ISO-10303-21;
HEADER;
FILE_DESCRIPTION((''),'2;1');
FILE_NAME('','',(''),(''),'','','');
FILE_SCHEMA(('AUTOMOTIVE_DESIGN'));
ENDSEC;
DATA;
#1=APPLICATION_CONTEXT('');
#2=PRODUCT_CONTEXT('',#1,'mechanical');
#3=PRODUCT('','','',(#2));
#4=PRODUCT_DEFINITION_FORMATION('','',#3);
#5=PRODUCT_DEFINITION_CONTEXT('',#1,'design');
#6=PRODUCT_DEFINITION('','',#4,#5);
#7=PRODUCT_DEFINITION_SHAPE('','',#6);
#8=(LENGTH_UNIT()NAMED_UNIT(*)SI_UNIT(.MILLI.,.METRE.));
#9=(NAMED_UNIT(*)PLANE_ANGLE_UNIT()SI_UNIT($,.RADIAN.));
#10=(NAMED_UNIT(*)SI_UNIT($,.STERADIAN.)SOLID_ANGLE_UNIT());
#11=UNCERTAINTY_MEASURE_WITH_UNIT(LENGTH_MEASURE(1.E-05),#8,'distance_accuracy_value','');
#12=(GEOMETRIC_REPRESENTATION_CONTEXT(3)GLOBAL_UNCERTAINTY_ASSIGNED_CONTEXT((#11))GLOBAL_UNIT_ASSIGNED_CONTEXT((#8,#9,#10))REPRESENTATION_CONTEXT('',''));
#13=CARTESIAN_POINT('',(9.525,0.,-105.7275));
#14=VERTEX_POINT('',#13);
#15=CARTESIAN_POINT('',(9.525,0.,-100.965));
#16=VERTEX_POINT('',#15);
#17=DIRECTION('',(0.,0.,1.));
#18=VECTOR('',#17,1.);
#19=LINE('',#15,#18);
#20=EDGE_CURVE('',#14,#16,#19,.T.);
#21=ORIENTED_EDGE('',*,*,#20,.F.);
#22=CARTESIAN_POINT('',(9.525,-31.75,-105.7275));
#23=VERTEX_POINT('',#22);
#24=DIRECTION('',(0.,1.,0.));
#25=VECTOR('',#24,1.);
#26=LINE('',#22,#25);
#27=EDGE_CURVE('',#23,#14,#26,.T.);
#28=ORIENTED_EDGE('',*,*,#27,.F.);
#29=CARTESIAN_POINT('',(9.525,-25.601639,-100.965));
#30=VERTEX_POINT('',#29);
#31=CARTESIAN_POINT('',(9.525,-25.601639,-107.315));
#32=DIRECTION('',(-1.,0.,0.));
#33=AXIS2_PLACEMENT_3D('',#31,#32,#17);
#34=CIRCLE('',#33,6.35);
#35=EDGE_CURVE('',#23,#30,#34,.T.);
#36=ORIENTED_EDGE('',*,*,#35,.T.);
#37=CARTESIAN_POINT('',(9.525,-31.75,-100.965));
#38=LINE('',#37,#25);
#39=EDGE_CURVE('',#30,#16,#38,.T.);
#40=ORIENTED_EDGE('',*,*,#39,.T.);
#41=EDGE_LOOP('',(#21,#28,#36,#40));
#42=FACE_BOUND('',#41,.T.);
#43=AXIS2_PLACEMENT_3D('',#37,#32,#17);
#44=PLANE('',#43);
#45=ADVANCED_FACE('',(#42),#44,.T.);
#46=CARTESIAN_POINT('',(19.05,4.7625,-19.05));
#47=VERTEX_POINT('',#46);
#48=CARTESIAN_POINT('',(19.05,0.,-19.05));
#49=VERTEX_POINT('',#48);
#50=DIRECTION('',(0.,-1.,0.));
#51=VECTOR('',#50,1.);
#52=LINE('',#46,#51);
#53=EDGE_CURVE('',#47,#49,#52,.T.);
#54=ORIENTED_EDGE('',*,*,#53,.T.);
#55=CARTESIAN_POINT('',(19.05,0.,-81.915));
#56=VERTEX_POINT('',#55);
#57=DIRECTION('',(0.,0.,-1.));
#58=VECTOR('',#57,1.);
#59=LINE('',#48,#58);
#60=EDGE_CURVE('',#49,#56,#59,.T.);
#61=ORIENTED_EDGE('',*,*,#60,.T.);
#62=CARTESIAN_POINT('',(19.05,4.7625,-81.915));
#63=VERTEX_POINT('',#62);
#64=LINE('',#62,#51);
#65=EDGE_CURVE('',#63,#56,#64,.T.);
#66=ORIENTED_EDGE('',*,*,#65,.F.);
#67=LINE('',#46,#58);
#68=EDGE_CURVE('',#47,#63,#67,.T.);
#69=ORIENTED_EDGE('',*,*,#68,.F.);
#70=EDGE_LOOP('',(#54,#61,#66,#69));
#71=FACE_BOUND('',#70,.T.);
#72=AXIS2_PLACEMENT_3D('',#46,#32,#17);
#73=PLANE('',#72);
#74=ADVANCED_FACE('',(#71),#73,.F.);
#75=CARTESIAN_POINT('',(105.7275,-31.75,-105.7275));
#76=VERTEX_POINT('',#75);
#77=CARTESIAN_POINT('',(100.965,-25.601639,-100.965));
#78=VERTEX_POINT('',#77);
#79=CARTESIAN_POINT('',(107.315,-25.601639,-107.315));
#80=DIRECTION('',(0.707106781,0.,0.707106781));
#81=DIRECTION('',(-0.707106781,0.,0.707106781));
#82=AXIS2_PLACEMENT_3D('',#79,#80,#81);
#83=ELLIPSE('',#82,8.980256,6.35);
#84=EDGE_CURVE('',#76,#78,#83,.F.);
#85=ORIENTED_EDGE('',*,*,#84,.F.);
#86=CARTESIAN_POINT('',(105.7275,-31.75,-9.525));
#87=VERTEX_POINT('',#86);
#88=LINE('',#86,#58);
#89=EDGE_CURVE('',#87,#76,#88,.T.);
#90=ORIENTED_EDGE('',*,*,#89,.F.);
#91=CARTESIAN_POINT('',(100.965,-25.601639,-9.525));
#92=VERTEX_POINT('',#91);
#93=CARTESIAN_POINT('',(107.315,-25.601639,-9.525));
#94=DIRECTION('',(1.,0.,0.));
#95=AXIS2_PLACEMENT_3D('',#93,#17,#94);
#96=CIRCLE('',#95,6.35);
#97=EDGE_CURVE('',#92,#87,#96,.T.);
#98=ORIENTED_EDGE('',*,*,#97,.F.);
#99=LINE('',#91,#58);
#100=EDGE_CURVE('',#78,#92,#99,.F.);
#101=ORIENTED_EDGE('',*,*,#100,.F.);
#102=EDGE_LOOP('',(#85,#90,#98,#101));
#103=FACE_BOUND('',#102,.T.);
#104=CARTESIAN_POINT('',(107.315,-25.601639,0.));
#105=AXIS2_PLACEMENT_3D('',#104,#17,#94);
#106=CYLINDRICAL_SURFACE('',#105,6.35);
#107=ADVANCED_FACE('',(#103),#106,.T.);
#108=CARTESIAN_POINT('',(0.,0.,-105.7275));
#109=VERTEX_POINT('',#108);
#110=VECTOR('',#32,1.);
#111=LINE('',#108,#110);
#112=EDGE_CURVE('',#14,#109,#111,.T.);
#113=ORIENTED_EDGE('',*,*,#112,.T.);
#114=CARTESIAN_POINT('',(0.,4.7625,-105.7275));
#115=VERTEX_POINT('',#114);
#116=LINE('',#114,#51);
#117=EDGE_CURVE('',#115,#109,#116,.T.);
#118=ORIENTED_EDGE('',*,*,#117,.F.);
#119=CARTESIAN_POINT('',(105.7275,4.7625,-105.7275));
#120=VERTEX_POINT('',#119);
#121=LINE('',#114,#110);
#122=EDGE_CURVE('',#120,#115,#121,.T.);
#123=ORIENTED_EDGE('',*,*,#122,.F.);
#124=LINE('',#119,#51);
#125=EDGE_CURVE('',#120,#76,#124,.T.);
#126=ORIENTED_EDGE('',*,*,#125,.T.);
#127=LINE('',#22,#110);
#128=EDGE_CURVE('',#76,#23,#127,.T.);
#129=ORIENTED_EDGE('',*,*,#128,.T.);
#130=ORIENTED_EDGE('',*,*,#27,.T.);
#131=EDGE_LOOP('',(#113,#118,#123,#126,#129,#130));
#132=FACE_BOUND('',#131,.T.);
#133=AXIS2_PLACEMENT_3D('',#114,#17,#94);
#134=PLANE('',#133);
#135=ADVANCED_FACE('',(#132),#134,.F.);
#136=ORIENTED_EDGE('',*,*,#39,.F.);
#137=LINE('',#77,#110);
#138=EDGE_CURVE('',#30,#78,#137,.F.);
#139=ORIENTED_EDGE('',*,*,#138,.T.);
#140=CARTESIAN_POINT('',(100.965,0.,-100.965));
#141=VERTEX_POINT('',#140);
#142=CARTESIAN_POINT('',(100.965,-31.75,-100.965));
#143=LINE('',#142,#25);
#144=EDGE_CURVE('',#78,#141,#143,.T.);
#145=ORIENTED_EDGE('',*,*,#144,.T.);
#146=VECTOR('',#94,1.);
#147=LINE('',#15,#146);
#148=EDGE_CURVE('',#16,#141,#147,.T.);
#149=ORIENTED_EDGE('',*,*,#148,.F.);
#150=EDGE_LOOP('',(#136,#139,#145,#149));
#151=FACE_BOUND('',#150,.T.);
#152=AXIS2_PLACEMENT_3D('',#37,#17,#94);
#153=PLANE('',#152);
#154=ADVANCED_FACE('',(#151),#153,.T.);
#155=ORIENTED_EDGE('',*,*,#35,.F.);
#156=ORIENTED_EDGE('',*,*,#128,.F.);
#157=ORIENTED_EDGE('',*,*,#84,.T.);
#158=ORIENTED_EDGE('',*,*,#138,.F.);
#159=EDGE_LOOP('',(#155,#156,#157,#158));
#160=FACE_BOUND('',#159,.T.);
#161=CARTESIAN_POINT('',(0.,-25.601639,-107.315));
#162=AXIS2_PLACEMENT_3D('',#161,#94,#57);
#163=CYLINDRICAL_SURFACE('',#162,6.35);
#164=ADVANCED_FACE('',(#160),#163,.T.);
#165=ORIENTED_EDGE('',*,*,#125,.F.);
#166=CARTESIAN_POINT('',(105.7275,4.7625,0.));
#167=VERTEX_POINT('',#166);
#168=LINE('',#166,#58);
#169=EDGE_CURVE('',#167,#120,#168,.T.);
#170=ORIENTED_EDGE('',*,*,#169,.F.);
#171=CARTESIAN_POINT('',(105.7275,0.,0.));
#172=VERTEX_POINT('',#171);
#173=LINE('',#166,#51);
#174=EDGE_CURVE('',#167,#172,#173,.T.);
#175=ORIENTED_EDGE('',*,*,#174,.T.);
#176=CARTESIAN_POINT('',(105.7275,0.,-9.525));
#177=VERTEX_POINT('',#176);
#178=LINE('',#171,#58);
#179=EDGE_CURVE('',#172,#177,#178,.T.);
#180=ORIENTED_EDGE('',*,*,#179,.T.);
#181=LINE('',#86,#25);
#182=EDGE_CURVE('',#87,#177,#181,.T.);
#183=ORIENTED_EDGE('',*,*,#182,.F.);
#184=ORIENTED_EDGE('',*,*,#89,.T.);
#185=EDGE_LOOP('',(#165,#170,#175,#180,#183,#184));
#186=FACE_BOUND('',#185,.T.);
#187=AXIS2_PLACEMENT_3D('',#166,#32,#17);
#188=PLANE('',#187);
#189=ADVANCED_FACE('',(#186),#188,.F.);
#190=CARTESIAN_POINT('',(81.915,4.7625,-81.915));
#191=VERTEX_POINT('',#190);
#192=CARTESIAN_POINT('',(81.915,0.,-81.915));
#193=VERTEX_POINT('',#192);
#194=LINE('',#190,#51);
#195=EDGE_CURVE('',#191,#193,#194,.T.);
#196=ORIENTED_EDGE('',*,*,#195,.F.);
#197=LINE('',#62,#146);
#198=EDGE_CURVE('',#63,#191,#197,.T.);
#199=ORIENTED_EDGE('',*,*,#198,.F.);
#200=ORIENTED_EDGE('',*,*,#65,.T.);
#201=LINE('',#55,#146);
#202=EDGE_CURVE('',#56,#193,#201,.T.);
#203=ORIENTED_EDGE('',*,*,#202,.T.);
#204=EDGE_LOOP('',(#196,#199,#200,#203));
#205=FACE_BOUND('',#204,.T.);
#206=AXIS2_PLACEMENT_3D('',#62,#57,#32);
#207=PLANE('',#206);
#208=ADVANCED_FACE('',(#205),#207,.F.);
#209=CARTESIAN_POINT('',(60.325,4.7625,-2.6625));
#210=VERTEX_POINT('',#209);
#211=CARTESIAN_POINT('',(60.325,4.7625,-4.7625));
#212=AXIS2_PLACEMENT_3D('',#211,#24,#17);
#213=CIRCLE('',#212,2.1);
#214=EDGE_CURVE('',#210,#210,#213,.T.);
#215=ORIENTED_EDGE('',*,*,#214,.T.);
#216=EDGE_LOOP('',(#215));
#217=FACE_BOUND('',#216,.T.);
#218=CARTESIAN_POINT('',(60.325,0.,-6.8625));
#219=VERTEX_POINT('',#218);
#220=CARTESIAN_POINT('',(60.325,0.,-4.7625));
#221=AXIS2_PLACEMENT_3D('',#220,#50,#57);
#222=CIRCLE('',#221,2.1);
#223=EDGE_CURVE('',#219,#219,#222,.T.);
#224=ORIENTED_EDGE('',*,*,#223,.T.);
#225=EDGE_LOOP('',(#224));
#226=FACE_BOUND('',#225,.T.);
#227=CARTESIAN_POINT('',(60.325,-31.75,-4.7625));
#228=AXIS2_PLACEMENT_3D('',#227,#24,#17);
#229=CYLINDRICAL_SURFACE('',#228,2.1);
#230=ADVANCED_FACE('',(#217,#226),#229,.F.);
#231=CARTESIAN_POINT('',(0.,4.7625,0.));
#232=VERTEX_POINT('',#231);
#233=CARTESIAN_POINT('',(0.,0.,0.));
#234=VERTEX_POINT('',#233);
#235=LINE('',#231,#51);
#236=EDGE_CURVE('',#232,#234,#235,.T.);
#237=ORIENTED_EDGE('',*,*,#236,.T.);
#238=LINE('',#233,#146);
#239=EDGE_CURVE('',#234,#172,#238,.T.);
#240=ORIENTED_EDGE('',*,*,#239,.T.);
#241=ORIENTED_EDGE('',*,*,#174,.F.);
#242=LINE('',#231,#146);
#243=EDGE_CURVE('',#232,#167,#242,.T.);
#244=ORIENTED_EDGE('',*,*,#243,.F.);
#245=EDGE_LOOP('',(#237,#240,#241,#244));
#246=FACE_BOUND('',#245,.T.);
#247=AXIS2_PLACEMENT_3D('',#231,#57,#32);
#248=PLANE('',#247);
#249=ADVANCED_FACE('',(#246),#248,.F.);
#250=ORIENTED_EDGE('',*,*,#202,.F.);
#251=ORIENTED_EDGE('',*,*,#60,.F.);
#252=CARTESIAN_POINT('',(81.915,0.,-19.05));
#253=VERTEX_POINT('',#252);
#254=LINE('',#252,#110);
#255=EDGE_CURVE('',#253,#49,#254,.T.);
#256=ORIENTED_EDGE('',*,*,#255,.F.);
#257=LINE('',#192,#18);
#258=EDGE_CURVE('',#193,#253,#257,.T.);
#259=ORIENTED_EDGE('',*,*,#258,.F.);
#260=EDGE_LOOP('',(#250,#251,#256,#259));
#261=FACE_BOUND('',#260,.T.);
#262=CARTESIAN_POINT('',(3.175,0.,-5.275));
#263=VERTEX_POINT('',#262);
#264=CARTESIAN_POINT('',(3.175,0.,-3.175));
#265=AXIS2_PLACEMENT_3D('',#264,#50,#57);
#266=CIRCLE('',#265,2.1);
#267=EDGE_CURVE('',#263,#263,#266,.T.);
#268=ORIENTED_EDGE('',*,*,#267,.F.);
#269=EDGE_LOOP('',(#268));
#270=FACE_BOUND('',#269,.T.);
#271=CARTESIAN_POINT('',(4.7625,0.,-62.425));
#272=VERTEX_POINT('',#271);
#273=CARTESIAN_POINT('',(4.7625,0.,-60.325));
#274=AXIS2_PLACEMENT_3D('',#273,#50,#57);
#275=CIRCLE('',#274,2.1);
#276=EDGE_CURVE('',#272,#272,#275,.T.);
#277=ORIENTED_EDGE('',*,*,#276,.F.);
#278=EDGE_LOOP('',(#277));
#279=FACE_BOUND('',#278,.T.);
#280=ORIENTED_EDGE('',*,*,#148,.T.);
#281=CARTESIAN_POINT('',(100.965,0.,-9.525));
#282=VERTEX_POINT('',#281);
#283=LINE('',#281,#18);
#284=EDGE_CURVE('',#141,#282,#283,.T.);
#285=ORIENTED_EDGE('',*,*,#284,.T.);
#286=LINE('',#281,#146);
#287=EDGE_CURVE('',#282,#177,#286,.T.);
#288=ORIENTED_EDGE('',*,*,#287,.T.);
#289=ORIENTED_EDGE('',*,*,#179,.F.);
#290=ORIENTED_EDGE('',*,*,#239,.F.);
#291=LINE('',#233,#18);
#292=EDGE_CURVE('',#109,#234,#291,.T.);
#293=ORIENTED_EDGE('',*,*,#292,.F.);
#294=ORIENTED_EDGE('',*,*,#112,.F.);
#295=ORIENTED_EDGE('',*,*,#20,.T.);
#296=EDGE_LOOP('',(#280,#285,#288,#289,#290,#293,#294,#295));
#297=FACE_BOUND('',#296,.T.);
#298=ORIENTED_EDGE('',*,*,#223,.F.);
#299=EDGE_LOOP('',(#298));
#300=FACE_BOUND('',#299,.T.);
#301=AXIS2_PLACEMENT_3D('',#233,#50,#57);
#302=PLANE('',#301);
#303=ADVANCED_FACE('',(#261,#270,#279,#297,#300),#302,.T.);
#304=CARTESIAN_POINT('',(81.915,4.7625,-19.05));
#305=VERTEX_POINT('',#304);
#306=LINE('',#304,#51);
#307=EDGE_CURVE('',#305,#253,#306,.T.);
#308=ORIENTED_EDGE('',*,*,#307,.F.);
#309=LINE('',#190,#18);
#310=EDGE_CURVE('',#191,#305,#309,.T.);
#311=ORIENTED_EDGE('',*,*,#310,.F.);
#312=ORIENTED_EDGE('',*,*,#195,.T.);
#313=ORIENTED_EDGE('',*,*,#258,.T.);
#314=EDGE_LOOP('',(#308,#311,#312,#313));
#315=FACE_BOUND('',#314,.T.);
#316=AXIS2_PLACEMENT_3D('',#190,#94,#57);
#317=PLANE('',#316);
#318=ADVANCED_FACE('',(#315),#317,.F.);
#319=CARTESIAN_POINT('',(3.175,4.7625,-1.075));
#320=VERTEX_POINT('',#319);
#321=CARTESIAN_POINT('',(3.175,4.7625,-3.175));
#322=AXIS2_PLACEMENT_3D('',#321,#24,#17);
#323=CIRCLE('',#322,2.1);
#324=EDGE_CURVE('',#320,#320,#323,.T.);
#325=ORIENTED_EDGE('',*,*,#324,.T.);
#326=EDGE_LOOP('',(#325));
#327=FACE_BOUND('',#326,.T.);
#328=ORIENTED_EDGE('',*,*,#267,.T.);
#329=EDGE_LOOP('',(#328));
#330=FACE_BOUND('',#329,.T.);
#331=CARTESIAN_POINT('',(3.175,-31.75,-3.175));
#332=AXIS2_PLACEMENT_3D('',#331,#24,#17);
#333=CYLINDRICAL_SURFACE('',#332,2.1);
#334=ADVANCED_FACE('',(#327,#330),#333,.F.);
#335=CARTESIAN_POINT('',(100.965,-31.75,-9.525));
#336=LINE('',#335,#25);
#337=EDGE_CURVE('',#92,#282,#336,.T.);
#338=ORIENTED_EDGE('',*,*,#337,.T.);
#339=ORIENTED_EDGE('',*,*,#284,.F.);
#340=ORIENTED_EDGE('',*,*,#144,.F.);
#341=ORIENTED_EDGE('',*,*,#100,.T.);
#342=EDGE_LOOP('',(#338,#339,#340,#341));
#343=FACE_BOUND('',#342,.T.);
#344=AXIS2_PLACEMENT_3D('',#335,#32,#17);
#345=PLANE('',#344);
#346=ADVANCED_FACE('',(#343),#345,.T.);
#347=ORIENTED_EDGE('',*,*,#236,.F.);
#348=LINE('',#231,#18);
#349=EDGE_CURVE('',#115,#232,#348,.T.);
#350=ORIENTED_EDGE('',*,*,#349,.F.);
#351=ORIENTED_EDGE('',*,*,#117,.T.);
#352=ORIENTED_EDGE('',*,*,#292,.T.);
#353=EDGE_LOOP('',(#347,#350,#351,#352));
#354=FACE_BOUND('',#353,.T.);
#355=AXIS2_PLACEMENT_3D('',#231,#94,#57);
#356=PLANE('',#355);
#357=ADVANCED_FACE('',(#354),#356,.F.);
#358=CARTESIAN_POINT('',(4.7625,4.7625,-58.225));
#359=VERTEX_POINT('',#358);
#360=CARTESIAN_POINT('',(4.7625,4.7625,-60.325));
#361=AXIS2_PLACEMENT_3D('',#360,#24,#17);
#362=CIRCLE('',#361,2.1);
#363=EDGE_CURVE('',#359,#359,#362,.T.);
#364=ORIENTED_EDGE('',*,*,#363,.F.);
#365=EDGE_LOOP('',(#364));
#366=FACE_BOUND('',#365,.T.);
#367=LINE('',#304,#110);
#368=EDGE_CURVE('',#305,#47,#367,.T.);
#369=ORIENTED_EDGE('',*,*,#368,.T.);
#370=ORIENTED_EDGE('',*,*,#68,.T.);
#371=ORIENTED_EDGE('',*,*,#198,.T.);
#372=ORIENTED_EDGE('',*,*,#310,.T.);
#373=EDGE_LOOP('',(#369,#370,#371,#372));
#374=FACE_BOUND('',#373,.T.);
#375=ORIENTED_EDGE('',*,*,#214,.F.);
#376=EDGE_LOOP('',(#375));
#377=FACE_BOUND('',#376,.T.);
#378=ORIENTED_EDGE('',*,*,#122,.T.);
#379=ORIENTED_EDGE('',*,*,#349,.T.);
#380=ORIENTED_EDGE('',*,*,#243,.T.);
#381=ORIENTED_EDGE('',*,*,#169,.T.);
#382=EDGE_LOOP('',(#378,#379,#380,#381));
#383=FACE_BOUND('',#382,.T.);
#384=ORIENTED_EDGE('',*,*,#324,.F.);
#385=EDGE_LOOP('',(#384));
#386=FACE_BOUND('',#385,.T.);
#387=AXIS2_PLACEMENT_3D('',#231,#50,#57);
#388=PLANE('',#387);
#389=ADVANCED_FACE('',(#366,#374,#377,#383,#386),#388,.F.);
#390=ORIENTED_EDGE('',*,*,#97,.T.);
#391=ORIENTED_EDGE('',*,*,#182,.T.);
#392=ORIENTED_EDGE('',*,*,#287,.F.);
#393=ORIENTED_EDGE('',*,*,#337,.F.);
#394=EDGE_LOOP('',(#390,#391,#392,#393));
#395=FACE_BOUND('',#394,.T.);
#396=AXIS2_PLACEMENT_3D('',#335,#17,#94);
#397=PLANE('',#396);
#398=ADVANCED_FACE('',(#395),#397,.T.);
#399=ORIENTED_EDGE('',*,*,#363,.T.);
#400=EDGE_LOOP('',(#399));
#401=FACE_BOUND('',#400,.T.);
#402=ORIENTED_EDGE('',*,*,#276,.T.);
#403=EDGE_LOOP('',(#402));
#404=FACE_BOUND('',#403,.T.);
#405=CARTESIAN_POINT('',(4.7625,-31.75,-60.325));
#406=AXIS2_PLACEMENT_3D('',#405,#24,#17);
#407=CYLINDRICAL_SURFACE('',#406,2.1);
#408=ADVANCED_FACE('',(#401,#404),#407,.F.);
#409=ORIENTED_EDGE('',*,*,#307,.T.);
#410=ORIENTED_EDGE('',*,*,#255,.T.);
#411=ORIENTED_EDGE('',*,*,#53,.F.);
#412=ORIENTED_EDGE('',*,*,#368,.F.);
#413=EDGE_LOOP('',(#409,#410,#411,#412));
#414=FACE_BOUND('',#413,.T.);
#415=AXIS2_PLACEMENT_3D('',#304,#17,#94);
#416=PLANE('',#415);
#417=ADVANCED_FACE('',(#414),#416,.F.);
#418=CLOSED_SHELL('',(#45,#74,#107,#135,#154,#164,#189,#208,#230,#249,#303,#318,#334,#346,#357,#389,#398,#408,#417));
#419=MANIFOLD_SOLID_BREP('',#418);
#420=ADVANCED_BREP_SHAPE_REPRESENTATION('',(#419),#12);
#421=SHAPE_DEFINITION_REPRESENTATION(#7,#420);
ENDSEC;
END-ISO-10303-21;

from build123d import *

# Parameters (mm, degrees)
SKETCH2_W           = 105.7275
SKETCH2_H           = 105.7275
BOSS_EXTRUDE1_DEPTH = 4.7625
BOSS_EXTRUDE2_DEPTH = 31.75
SKETCH6_R           = 2.099999991
CUT_EXTRUDE1_DEPTH  = 154.914817899
FILLET1_R           = 6.35
SKETCH7_W           = 62.865
SKETCH7_H           = 62.865
CUT_EXTRUDE2_DEPTH  = 153.855065381


with BuildPart() as part:
    # Sketch2 → Boss-Extrude1 (new body)
    with BuildSketch(Plane(origin=(0, 0, 0), x_dir=(1, 0, 0), z_dir=(0, 1, 0))):
        with Locations((52.86375, 52.86375)):
            Rectangle(SKETCH2_W, SKETCH2_H)
    extrude(amount=BOSS_EXTRUDE1_DEPTH)

    # Sketch5 → Boss-Extrude2 (add)
    with BuildSketch(Plane(origin=(0, 0, 0), x_dir=(1, 0, 0), z_dir=(0, 1, 0))):
        Polygon((105.7275, 9.525), (105.7275, 105.7275), (9.525, 105.7275), (9.525, 100.965), (100.965, 100.965), (100.965, 9.525), align=None)
    extrude(amount=-BOSS_EXTRUDE2_DEPTH)

    # Sketch6 → Cut-Extrude1 (cut, through all)
    with BuildSketch(Plane(origin=(0, 4.7625, 0), x_dir=(1, 0, 0), z_dir=(0, 1, 0))):
        with Locations(Location((3.175, 3.175, 0), (0, 0, 270))):
            Circle(SKETCH6_R)
        with Locations(Location((60.325, 4.7625, 0), (0, 0, 270))):
            Circle(SKETCH6_R)
        with Locations(Location((4.7625, 60.325, 0), (0, 0, 270))):
            Circle(SKETCH6_R)
    extrude(amount=-CUT_EXTRUDE1_DEPTH, mode=Mode.SUBTRACT)

    # Fillet1
    # the kernel refuses this fillet: 6.35 mm, written as the material it takes off along each edge
    with BuildSketch(Plane(origin=(9.525, -31.75, -100.965), x_dir=(0, 0, -1), z_dir=(1, 0, 0)), Plane(origin=(100.965, -31.75, -100.965), x_dir=(1, 0, 0), z_dir=(0, 0, 1))) as fillet1_piece_1:
        with BuildLine():
            CenterArc((6.35, 6.148361062), FILLET1_R, 180, 75.522487814)
            Line((0, 6.148361062), (-0.127, 6.148361062))
            Line((-0.127, 6.148361062), (-0.127, 0))
            Line((-0.127, 0), (0, -0.127))
            ThreePointArc((0, -0.127), (2.38125, -0.127), (4.73075, -0.122967221))
            Line((4.73075, -0.122967221), (4.7625, 0))
        make_face()
    extrude(amount=91.44, mode=Mode.SUBTRACT)
    with BuildSketch(Plane(origin=(9.525, -31.75, -100.965), x_dir=(0, 0, -1), z_dir=(1, 0, 0))) as fillet1_piece_2a_section:
        with BuildLine():
            CenterArc((6.35, 6.148361062), FILLET1_R, 180, 75.522487814)
            Line((0, 6.148361062), (-0.127, 6.148361062))
            Line((-0.127, 6.148361062), (-0.127, 0))
            Line((-0.127, 0), (0, -0.127))
            ThreePointArc((0, -0.127), (2.38125, -0.127), (4.73075, -0.122967221))
            Line((4.73075, -0.122967221), (4.7625, 0))
        make_face()
    fillet1_piece_2a = extrude(amount=106.810902655, mode=Mode.PRIVATE)
    fillet1_piece_2a = split(fillet1_piece_2a, bisect_by=Plane(origin=(100.965, -30.30128496, -102.168907648), z_dir=(1, 0, 0)), keep=Keep.TOP, mode=Mode.PRIVATE)
    with BuildSketch(Plane(origin=(100.965, -31.75, -116.335902655), x_dir=(1, 0, 0), z_dir=(0, 0, 1))) as fillet1_piece_2b_section:
        with BuildLine():
            CenterArc((6.35, 6.148361062), FILLET1_R, 180, 75.522487814)
            Line((0, 6.148361062), (-0.127, 6.148361062))
            Line((-0.127, 6.148361062), (-0.127, 0))
            Line((-0.127, 0), (0, -0.127))
            ThreePointArc((0, -0.127), (2.38125, -0.127), (4.73075, -0.122967221))
            Line((4.73075, -0.122967221), (4.7625, 0))
        make_face()
    fillet1_piece_2b = extrude(amount=106.810902655, mode=Mode.PRIVATE)
    fillet1_piece_2b = split(fillet1_piece_2b, bisect_by=Plane(origin=(102.168907648, -30.30128496, -100.965), z_dir=(0, 0, -1)), keep=Keep.TOP, mode=Mode.PRIVATE)
    fillet1_piece_2 = fillet1_piece_2a & fillet1_piece_2b
    add(fillet1_piece_2, mode=Mode.SUBTRACT)

    # Sketch7 → Cut-Extrude2 (cut, through all)
    with BuildSketch(Plane.XZ):
        with Locations((50.4825, -50.4825)):
            Rectangle(SKETCH7_W, SKETCH7_H)
    extrude(amount=-CUT_EXTRUDE2_DEPTH, mode=Mode.SUBTRACT)


solid = part.part
